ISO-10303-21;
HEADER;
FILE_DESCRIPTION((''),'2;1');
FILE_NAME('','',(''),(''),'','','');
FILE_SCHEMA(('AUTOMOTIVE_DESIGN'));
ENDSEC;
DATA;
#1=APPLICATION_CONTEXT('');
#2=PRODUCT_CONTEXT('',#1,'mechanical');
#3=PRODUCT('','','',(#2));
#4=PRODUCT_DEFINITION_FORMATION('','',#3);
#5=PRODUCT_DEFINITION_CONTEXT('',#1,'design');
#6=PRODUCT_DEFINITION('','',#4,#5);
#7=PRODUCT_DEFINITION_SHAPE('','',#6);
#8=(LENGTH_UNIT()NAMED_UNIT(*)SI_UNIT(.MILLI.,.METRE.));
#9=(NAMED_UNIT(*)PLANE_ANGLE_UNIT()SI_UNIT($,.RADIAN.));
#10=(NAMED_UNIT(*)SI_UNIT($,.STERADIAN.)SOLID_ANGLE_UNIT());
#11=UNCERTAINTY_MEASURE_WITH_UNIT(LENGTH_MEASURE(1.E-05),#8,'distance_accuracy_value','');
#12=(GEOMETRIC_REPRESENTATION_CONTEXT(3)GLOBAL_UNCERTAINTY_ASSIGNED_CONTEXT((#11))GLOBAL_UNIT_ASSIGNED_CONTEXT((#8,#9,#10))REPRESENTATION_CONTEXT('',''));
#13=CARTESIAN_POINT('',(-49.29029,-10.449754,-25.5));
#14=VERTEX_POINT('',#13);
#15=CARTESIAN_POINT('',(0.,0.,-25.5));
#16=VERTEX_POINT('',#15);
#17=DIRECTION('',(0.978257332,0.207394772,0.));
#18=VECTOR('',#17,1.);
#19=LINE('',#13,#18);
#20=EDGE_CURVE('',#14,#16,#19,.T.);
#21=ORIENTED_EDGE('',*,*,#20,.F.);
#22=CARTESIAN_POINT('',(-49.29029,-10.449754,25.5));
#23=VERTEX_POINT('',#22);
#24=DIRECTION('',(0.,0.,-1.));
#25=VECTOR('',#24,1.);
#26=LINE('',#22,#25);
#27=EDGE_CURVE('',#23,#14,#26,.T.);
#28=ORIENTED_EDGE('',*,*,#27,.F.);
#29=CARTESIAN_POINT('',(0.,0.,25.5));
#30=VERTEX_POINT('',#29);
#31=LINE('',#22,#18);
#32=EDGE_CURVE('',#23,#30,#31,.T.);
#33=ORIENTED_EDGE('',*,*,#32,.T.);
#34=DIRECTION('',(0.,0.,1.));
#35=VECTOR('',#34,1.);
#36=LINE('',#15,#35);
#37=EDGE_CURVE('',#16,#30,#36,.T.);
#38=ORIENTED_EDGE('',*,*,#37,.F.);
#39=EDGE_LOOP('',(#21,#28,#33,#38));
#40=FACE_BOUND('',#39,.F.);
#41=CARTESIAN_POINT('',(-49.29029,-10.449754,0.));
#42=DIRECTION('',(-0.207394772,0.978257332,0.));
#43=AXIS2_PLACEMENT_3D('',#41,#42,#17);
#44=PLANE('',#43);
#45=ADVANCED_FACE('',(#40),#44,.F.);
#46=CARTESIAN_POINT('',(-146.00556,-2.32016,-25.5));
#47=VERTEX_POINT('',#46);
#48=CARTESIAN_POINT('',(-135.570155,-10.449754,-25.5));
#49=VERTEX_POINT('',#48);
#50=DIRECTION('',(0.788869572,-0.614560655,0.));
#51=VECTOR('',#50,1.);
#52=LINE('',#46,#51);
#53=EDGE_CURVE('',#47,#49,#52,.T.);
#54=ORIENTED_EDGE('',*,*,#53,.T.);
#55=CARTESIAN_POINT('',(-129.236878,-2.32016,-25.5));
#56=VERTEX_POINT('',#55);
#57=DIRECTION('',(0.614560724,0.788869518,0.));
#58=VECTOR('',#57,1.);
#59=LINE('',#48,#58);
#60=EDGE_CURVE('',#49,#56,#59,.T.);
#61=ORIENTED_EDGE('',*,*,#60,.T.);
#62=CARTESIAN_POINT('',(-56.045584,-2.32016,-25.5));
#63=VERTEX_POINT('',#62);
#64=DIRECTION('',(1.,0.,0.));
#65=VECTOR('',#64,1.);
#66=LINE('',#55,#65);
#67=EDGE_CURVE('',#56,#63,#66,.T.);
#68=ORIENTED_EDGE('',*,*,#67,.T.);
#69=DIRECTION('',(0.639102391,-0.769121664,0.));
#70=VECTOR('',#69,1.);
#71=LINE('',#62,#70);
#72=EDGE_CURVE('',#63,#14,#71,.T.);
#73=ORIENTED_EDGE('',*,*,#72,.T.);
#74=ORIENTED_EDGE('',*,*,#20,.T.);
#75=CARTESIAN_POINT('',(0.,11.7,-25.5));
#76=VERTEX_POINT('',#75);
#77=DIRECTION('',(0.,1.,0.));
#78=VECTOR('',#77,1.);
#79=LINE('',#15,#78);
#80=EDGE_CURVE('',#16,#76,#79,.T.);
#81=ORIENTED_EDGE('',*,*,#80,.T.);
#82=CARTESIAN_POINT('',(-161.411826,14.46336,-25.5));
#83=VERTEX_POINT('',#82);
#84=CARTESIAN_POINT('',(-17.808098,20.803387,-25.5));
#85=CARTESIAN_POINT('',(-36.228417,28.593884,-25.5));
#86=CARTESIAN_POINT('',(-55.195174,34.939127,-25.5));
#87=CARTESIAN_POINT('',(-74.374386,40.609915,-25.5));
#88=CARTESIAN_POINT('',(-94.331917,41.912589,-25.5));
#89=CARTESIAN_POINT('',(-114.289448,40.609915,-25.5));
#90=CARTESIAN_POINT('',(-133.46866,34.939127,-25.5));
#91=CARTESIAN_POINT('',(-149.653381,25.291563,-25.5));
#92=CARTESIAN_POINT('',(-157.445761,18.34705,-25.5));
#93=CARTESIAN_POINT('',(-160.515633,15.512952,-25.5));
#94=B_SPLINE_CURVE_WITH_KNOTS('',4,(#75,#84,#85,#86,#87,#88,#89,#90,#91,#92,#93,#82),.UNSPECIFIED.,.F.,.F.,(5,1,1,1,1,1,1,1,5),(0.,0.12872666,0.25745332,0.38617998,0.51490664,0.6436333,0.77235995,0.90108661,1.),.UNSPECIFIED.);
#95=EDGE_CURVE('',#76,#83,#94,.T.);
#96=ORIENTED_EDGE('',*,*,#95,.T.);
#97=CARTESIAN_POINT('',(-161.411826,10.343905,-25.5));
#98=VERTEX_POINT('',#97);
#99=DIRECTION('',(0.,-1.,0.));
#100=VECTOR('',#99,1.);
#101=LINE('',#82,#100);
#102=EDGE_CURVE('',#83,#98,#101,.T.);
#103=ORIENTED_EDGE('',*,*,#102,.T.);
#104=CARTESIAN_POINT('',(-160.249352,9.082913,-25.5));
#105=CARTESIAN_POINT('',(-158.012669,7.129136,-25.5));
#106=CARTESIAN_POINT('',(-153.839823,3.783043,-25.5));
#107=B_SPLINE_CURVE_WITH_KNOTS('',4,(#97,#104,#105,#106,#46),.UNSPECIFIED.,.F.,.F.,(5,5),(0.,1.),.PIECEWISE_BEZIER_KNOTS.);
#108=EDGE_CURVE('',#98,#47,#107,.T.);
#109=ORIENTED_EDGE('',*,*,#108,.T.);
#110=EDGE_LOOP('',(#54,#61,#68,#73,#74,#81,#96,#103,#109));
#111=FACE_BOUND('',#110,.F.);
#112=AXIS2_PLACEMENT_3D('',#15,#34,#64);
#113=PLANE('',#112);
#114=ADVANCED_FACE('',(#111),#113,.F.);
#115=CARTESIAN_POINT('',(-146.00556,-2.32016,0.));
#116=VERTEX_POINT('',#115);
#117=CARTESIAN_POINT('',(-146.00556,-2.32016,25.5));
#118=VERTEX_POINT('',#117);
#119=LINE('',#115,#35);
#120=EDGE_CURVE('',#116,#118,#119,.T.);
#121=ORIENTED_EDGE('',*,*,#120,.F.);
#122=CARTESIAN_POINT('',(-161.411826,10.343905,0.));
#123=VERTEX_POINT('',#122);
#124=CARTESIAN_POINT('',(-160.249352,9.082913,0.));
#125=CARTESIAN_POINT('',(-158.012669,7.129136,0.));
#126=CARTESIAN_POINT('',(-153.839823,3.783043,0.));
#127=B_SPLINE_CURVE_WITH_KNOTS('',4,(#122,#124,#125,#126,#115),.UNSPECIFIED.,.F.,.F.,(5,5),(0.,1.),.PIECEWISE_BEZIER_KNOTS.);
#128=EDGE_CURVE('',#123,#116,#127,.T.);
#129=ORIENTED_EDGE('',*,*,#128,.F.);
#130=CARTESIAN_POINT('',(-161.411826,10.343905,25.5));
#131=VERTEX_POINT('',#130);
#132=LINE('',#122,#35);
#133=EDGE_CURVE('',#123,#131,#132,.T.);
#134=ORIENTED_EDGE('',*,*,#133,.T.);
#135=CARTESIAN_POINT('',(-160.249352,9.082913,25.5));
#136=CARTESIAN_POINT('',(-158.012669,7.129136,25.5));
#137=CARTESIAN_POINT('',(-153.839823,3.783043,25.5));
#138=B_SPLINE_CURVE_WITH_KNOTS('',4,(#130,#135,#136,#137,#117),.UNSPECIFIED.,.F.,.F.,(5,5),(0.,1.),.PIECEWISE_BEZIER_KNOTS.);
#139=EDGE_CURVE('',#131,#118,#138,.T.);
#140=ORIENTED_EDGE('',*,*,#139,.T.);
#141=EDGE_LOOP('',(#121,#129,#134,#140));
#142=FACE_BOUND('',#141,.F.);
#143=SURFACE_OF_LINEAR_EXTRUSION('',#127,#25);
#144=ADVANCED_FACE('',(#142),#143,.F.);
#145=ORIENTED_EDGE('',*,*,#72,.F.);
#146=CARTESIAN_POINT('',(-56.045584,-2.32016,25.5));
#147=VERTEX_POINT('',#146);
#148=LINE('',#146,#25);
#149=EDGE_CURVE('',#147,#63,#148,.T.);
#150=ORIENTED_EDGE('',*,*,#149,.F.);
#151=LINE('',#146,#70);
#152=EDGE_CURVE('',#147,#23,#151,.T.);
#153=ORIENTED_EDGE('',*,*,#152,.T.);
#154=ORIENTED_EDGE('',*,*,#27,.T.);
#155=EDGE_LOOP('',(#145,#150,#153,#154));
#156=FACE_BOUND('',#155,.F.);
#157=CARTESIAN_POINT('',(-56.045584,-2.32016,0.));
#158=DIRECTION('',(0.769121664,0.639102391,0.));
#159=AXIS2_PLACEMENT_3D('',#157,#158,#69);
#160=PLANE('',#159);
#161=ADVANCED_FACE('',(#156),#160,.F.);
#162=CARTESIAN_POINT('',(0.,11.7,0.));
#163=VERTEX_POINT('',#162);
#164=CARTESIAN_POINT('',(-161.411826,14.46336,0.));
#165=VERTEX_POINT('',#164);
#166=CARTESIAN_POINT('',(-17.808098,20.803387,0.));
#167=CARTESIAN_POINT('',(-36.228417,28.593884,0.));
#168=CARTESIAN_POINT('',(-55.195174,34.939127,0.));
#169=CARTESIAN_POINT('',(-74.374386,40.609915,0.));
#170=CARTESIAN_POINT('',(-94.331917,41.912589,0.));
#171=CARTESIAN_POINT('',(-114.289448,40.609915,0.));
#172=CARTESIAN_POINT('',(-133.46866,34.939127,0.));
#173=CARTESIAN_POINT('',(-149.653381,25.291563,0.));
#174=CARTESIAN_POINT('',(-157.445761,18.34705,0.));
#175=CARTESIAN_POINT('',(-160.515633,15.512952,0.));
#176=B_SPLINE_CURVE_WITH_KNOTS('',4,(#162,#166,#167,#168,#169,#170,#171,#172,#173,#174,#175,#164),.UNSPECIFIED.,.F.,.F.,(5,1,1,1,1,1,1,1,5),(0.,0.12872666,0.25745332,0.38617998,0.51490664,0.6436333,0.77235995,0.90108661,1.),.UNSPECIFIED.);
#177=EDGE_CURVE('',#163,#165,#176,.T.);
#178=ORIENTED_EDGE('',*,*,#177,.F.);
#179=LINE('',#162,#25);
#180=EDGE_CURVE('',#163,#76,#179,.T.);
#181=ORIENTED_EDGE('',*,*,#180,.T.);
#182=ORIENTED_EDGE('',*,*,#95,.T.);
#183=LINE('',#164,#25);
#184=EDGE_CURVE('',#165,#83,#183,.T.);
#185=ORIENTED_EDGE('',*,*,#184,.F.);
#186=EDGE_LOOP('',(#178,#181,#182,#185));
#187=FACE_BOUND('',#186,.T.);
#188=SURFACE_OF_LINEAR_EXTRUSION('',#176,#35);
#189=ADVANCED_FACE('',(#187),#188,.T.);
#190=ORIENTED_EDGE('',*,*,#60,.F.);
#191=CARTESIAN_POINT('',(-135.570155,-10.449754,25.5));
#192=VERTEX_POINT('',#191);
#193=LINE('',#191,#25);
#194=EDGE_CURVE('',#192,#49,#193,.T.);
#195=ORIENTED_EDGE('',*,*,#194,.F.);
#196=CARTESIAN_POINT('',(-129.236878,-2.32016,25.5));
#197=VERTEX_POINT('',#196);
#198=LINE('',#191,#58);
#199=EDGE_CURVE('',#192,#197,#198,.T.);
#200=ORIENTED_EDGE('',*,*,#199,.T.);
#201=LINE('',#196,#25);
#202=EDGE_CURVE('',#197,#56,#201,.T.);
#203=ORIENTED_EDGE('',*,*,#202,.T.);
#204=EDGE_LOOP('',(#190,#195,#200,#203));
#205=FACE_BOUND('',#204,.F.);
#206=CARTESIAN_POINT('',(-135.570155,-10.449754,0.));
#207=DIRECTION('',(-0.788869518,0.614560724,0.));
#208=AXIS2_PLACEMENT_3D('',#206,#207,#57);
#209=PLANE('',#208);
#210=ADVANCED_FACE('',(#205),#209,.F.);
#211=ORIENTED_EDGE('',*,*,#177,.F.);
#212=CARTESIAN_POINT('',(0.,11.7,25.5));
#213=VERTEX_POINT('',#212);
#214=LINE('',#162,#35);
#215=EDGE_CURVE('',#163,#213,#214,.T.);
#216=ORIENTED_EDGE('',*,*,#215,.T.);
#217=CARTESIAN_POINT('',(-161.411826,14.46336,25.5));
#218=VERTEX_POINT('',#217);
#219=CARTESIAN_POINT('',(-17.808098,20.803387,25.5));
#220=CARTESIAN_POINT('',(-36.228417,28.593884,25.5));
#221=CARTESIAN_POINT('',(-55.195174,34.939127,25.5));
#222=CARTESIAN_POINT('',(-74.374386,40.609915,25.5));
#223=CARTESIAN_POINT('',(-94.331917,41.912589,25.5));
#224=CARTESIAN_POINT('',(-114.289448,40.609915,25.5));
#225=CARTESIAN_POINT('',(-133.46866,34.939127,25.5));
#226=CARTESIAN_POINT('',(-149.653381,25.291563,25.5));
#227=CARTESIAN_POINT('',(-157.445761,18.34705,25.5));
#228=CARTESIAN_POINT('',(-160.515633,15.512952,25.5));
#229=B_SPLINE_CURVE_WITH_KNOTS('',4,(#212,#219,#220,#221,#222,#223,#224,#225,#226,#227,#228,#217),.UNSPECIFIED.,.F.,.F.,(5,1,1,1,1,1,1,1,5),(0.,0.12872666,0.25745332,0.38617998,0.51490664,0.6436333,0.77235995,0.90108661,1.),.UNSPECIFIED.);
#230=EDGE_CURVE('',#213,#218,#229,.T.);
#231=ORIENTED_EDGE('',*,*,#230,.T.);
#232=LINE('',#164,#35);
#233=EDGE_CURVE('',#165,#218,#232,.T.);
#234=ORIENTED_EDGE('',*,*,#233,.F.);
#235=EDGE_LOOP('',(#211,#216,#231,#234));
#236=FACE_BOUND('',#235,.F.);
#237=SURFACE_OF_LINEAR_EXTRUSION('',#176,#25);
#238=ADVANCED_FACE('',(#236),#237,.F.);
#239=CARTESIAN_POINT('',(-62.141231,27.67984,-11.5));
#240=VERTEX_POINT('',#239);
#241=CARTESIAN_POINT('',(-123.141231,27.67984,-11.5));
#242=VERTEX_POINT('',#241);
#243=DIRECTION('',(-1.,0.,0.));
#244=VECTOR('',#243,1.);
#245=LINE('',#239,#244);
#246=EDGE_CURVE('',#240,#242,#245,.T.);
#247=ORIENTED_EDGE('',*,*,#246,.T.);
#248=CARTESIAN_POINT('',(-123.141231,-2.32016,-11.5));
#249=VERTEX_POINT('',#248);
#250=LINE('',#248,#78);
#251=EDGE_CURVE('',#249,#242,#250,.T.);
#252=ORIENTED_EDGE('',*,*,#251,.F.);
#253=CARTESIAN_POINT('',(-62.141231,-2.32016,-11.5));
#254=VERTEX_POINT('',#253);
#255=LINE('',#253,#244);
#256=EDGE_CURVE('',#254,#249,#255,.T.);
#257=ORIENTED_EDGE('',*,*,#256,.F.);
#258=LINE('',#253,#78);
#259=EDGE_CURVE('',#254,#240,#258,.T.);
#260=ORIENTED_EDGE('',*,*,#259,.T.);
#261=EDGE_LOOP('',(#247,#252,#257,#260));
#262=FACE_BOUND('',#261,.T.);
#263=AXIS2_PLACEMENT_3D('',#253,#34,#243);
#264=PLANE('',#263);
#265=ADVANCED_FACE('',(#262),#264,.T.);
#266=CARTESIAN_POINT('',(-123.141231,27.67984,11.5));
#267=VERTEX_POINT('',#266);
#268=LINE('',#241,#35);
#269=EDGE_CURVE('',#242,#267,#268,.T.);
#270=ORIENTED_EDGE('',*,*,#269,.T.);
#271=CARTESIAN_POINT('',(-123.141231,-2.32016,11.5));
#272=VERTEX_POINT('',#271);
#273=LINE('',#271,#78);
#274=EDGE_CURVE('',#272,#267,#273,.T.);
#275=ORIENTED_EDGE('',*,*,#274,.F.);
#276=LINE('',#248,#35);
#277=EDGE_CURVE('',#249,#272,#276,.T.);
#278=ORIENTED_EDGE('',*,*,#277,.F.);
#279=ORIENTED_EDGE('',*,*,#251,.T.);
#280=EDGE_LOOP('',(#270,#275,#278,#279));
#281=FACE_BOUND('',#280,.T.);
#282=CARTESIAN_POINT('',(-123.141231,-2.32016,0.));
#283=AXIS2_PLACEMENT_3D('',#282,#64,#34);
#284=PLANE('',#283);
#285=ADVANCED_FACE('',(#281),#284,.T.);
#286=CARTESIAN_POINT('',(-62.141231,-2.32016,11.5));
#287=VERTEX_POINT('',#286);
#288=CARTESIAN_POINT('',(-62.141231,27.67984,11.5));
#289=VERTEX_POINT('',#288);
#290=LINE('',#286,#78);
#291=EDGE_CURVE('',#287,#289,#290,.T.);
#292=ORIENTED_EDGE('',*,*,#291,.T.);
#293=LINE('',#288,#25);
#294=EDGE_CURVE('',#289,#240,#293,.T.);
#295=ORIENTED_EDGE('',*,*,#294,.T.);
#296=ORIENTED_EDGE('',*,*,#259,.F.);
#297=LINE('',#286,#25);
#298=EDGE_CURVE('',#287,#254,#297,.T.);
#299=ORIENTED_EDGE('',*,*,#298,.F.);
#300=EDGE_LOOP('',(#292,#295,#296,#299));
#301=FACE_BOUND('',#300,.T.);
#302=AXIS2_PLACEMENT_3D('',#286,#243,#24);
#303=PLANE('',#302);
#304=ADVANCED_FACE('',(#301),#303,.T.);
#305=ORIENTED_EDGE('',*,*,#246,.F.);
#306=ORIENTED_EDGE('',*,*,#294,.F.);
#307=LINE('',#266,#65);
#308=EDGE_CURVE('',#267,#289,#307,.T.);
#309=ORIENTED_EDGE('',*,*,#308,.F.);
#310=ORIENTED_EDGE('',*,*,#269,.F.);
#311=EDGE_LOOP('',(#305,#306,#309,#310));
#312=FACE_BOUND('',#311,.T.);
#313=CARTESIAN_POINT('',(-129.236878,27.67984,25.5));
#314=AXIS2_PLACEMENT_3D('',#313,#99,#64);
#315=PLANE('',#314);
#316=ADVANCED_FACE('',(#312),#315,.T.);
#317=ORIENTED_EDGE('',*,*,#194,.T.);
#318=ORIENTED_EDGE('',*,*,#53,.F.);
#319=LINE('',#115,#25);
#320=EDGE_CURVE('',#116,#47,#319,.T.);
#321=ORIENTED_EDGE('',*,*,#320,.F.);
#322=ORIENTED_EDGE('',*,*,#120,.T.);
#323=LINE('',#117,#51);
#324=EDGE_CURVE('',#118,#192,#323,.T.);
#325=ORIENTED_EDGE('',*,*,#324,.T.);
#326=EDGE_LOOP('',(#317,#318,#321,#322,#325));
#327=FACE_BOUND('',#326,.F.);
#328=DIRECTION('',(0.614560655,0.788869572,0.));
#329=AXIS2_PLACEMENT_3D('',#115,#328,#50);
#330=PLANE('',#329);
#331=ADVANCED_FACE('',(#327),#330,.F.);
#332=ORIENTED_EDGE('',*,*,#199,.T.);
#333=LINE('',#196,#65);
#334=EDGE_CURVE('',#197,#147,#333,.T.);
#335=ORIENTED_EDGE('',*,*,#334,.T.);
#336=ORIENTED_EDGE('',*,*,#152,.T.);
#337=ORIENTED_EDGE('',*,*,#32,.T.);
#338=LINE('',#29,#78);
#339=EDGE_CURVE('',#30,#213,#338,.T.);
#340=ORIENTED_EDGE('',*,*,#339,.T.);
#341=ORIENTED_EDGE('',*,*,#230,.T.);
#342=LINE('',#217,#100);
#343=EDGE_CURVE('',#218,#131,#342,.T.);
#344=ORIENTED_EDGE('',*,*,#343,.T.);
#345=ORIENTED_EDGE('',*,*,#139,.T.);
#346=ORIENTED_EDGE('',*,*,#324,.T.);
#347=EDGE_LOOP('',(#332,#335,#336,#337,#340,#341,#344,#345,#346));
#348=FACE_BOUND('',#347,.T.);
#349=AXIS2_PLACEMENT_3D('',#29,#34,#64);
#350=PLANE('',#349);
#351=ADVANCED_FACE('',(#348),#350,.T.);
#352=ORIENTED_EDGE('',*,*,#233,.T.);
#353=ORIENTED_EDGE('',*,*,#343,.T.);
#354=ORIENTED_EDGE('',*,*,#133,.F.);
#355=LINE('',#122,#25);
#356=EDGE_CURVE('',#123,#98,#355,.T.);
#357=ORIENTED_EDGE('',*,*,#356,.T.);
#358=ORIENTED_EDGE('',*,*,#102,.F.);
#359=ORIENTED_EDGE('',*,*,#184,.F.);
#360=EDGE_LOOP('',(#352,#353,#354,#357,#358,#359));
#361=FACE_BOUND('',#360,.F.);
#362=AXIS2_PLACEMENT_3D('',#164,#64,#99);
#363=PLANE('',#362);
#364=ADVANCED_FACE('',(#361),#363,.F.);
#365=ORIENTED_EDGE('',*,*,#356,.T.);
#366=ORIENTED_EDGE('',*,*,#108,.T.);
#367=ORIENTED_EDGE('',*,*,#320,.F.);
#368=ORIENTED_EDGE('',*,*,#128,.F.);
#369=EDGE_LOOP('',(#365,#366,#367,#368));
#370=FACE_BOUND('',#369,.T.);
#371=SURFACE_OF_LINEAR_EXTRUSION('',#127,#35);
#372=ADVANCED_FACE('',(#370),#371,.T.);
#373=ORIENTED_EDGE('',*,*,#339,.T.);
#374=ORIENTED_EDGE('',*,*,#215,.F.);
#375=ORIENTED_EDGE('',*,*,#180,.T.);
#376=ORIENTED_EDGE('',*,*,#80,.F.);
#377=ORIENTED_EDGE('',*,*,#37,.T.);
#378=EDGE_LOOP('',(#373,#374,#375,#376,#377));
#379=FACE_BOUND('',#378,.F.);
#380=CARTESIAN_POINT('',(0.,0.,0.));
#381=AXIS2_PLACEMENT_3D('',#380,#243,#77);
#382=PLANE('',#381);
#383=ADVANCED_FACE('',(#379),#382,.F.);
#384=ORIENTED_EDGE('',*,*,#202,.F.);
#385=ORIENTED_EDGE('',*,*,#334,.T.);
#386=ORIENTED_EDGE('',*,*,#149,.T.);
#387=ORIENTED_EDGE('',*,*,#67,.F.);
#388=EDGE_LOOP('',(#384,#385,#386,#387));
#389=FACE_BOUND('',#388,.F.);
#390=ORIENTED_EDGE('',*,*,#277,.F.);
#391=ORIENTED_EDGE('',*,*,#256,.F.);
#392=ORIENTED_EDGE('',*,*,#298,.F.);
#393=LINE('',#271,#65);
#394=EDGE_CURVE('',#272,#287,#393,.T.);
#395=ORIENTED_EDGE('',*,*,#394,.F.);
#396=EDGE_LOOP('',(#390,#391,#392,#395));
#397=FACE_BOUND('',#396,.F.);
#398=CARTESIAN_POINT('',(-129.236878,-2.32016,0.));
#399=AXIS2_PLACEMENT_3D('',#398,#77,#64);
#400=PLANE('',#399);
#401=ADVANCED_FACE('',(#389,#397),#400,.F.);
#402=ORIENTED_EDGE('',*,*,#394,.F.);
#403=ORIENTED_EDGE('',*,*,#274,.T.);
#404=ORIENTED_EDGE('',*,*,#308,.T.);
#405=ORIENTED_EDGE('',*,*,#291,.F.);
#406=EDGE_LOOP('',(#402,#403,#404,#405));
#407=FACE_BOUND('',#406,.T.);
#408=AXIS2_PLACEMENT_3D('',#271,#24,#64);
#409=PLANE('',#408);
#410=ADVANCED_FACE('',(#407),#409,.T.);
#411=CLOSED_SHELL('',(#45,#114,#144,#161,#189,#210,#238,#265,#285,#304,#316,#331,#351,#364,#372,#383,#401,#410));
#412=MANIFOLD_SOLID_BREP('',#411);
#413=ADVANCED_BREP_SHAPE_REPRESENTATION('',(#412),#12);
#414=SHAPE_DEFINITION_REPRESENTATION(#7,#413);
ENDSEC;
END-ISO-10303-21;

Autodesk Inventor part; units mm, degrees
ref_plane "YZ Plane" through (0, 0, 0) normal (1, 0, 0) x (0, 1, 0)
ref_plane "XZ Plane" through (0, 0, 0) normal (0, 1, 0) x (-1, 0, 0)
ref_plane "XY Plane" through (0, 0, 0) normal (0, 0, 1) x (1, 0, 0)
sketch "Sketch1" plane through (0, 0, 0) normal (0, 0, 1) x (1, 0, 0)
  line L0 (0, 0) -> (0, 11.7)
  line L1 (0, 11.7) -> (-17.808098, 20.803387) construction
  line L2 (-17.808098, 20.803387) -> (-17.808098, -4.366613) construction
  line L3 (-17.808098, 20.803387) -> (-36.228417, 28.593884) construction
  line L4 (-36.228417, 28.593884) -> (-36.228417, -7.036116) construction
  line L5 (-36.228417, 28.593884) -> (-55.195174, 34.939127) construction
  line L6 (-55.195174, 34.939127) -> (-55.195174, -9.670873) construction
  line L7 (-55.195174, 34.939127) -> (-74.374386, 40.609915) construction
  line L8 (-74.374386, 40.609915) -> (-74.374386, -1.710085) construction
  line L9 (-74.374386, 40.609915) -> (-94.331917, 41.912589) construction
  line L10 (-94.331917, 41.912589) -> (-94.331917, -2.507411) construction
  line L11 (-94.331917, 41.912589) -> (-114.289448, 40.609915) construction
  line L12 (-114.289448, 40.609915) -> (-114.289448, -1.700085) construction
  line L13 (-114.289448, 40.609915) -> (-133.46866, 34.939127) construction
  line L14 (-133.46866, 34.939127) -> (-133.46866, -4.930873) construction
  line L15 (-133.46866, 34.939127) -> (-150.648076, 24.698635) construction
  line L16 (-150.648076, 24.698635) -> (-150.648076, 8.628635) construction
  line L17 (-150.648076, 24.698635) -> (-161.411826, 14.681933) construction
  line L18 (-161.411826, 14.681933) -> (-161.411826, 9.681933)
  line L19 (-133.212221, -2.32016) -> (-56.045584, -2.32016) construction
  line L20 (-56.045584, -2.32016) -> (-49.29029, -10.449754) construction
  line L21 (-49.29029, -10.449754) -> (0, 0) construction
  line L22 (0, 11.7) -> (-17.808098, 20.803387) construction
  line L23 (-17.808098, 20.803387) -> (-36.228417, 28.593884) construction
  line L24 (-36.228417, 28.593884) -> (-55.195174, 34.939127) construction
  line L25 (-55.195174, 34.939127) -> (-74.374386, 40.609915) construction
  line L26 (-74.374386, 40.609915) -> (-94.331917, 41.912589) construction
  line L27 (-94.331917, 41.912589) -> (-114.289448, 40.609915) construction
  line L28 (-114.289448, 40.609915) -> (-133.46866, 34.939127) construction
  line L29 (-133.46866, 34.939127) -> (-150.648076, 24.698635) construction
  line L30 (-150.648076, 24.698635) -> (-161.411826, 14.681933) construction
  line L31 (-161.411826, 14.681933) -> (-163.905372, 12.361449) construction
  line L32 (-163.905372, 12.361449) -> (-161.411826, 9.681933) construction
  line L33 (-161.411826, 9.681933) -> (-146.00556, -2.32016) construction
  spline S0 degree 4 poles (0, 11.7) (-17.808098, 20.803387) (-36.228417, 28.593884) (-55.195174, 34.939127) (-74.374386, 40.609915) (-94.331917, 41.912589) (-114.289448, 40.609915) (-133.46866, 34.939127) (-150.648076, 24.698635) (-161.411826, 14.681933) (-163.905372, 12.361449) (-161.411826, 9.681933) (-146.00556, -2.32016) knots 1 1 1 1 1 2 3 4 5 6 7 8 9 10 10 10 10 10
  line L34 (-161.411826, 9.681933) -> (-135.570155, -10.449754)
  line L35 (-135.570155, -10.449754) -> (-129.236878, -2.32016)
  line L36 (-129.236878, -2.32016) -> (-56.045584, -2.32016)
  line L37 (-56.045584, -2.32016) -> (-49.29029, -10.449754)
  line L38 (-49.29029, -10.449754) -> (0, 0)
  point P0 (-161.411826, 14.46336)
  point P1 (-161.411826, 10.343905)
  dimension "d0" = 11.7
  dimension "d1" = 20
  dimension "d2" = 25.17
  dimension "d3" = 20
  dimension "d4" = 35.63
  dimension "d5" = 20
  dimension "d6" = 44.61
  dimension "d7" = 20
  dimension "d8" = 42.32
  dimension "d9" = 20
  dimension "d10" = 44.42
  dimension "d11" = 20
  dimension "d12" = 42.31
  dimension "d13" = 20
  dimension "d14" = 39.87
  dimension "d15" = 20
  dimension "d16" = 16.07
  dimension "d18" = 5
sketch "Sketch1 outline for Extrusion1" plane through (0, 0, 0) normal (0, 0, 1) x (1, 0, 0)
  line L0 (0, 0) -> (0, 11.7)
  line L1 (-49.29029, -10.449754) -> (0, 0)
  line L2 (-56.045584, -2.32016) -> (-49.29029, -10.449754)
  line L3 (-129.236878, -2.32016) -> (-56.045584, -2.32016)
  line L4 (-135.570155, -10.449754) -> (-129.236878, -2.32016)
  line L5 (-146.00556, -2.32016) -> (-135.570155, -10.449754)
  spline S0 degree 4 poles (-161.411826, 10.343905) (-160.249352, 9.082913) (-158.012669, 7.129136) (-153.839823, 3.783043) (-146.00556, -2.32016) knots 0 0 0 0 0 1 1 1 1 1
  line L6 (-161.411826, 14.46336) -> (-161.411826, 10.343905)
  spline S1 degree 4 poles (0, 11.7) (-17.808098, 20.803387) (-36.228417, 28.593884) (-55.195174, 34.939127) (-74.374386, 40.609915) (-94.331917, 41.912589) (-114.289448, 40.609915) (-133.46866, 34.939127) (-149.653381, 25.291563) (-157.445761, 18.34705) (-160.515633, 15.512952) (-161.411826, 14.46336) knots 0 0 0 0 0 0.12872666 0.25745332 0.38617998 0.51490664 0.6436333 0.77235995 0.90108661 1 1 1 1 1
extrude "Extrusion1" add sketch "Sketch1 outline for Extrusion1" along normal mid plane 51
sketch "Sketch2" plane through (-129.236878, -2.32016, 25.5) normal (0, -1, 0) x (1, 0, 0)
  line L0 (73.191293, -51) -> (73.191293, 0)
  line L1 (0, 0) -> (73.191293, 0)
  line L2 (0, -51) -> (0, 0)
  line L3 (73.191293, -51) -> (0, -51)
  line L4 (6.095647, -25.5) -> (6.095647, -14)
  line L5 (6.095647, -14) -> (67.095647, -14)
  line L6 (67.095647, -14) -> (67.095647, -37)
  line L7 (67.095647, -37) -> (6.095647, -37)
  line L8 (6.095647, -37) -> (6.095647, -25.5)
  point P0 (129.236878, -25.5)
  point P1 (36.595647, -25.5)
  dimension "d24" = 30.5
  dimension "d25" = 11.5
  dimension "d26" = 61
  dimension "d27" = 23
extrude "Extrusion2" cut sketch "Sketch2" against normal blind 30 contours L4 L5 L6 L7 L8
properties part number "F-WheelPants"
